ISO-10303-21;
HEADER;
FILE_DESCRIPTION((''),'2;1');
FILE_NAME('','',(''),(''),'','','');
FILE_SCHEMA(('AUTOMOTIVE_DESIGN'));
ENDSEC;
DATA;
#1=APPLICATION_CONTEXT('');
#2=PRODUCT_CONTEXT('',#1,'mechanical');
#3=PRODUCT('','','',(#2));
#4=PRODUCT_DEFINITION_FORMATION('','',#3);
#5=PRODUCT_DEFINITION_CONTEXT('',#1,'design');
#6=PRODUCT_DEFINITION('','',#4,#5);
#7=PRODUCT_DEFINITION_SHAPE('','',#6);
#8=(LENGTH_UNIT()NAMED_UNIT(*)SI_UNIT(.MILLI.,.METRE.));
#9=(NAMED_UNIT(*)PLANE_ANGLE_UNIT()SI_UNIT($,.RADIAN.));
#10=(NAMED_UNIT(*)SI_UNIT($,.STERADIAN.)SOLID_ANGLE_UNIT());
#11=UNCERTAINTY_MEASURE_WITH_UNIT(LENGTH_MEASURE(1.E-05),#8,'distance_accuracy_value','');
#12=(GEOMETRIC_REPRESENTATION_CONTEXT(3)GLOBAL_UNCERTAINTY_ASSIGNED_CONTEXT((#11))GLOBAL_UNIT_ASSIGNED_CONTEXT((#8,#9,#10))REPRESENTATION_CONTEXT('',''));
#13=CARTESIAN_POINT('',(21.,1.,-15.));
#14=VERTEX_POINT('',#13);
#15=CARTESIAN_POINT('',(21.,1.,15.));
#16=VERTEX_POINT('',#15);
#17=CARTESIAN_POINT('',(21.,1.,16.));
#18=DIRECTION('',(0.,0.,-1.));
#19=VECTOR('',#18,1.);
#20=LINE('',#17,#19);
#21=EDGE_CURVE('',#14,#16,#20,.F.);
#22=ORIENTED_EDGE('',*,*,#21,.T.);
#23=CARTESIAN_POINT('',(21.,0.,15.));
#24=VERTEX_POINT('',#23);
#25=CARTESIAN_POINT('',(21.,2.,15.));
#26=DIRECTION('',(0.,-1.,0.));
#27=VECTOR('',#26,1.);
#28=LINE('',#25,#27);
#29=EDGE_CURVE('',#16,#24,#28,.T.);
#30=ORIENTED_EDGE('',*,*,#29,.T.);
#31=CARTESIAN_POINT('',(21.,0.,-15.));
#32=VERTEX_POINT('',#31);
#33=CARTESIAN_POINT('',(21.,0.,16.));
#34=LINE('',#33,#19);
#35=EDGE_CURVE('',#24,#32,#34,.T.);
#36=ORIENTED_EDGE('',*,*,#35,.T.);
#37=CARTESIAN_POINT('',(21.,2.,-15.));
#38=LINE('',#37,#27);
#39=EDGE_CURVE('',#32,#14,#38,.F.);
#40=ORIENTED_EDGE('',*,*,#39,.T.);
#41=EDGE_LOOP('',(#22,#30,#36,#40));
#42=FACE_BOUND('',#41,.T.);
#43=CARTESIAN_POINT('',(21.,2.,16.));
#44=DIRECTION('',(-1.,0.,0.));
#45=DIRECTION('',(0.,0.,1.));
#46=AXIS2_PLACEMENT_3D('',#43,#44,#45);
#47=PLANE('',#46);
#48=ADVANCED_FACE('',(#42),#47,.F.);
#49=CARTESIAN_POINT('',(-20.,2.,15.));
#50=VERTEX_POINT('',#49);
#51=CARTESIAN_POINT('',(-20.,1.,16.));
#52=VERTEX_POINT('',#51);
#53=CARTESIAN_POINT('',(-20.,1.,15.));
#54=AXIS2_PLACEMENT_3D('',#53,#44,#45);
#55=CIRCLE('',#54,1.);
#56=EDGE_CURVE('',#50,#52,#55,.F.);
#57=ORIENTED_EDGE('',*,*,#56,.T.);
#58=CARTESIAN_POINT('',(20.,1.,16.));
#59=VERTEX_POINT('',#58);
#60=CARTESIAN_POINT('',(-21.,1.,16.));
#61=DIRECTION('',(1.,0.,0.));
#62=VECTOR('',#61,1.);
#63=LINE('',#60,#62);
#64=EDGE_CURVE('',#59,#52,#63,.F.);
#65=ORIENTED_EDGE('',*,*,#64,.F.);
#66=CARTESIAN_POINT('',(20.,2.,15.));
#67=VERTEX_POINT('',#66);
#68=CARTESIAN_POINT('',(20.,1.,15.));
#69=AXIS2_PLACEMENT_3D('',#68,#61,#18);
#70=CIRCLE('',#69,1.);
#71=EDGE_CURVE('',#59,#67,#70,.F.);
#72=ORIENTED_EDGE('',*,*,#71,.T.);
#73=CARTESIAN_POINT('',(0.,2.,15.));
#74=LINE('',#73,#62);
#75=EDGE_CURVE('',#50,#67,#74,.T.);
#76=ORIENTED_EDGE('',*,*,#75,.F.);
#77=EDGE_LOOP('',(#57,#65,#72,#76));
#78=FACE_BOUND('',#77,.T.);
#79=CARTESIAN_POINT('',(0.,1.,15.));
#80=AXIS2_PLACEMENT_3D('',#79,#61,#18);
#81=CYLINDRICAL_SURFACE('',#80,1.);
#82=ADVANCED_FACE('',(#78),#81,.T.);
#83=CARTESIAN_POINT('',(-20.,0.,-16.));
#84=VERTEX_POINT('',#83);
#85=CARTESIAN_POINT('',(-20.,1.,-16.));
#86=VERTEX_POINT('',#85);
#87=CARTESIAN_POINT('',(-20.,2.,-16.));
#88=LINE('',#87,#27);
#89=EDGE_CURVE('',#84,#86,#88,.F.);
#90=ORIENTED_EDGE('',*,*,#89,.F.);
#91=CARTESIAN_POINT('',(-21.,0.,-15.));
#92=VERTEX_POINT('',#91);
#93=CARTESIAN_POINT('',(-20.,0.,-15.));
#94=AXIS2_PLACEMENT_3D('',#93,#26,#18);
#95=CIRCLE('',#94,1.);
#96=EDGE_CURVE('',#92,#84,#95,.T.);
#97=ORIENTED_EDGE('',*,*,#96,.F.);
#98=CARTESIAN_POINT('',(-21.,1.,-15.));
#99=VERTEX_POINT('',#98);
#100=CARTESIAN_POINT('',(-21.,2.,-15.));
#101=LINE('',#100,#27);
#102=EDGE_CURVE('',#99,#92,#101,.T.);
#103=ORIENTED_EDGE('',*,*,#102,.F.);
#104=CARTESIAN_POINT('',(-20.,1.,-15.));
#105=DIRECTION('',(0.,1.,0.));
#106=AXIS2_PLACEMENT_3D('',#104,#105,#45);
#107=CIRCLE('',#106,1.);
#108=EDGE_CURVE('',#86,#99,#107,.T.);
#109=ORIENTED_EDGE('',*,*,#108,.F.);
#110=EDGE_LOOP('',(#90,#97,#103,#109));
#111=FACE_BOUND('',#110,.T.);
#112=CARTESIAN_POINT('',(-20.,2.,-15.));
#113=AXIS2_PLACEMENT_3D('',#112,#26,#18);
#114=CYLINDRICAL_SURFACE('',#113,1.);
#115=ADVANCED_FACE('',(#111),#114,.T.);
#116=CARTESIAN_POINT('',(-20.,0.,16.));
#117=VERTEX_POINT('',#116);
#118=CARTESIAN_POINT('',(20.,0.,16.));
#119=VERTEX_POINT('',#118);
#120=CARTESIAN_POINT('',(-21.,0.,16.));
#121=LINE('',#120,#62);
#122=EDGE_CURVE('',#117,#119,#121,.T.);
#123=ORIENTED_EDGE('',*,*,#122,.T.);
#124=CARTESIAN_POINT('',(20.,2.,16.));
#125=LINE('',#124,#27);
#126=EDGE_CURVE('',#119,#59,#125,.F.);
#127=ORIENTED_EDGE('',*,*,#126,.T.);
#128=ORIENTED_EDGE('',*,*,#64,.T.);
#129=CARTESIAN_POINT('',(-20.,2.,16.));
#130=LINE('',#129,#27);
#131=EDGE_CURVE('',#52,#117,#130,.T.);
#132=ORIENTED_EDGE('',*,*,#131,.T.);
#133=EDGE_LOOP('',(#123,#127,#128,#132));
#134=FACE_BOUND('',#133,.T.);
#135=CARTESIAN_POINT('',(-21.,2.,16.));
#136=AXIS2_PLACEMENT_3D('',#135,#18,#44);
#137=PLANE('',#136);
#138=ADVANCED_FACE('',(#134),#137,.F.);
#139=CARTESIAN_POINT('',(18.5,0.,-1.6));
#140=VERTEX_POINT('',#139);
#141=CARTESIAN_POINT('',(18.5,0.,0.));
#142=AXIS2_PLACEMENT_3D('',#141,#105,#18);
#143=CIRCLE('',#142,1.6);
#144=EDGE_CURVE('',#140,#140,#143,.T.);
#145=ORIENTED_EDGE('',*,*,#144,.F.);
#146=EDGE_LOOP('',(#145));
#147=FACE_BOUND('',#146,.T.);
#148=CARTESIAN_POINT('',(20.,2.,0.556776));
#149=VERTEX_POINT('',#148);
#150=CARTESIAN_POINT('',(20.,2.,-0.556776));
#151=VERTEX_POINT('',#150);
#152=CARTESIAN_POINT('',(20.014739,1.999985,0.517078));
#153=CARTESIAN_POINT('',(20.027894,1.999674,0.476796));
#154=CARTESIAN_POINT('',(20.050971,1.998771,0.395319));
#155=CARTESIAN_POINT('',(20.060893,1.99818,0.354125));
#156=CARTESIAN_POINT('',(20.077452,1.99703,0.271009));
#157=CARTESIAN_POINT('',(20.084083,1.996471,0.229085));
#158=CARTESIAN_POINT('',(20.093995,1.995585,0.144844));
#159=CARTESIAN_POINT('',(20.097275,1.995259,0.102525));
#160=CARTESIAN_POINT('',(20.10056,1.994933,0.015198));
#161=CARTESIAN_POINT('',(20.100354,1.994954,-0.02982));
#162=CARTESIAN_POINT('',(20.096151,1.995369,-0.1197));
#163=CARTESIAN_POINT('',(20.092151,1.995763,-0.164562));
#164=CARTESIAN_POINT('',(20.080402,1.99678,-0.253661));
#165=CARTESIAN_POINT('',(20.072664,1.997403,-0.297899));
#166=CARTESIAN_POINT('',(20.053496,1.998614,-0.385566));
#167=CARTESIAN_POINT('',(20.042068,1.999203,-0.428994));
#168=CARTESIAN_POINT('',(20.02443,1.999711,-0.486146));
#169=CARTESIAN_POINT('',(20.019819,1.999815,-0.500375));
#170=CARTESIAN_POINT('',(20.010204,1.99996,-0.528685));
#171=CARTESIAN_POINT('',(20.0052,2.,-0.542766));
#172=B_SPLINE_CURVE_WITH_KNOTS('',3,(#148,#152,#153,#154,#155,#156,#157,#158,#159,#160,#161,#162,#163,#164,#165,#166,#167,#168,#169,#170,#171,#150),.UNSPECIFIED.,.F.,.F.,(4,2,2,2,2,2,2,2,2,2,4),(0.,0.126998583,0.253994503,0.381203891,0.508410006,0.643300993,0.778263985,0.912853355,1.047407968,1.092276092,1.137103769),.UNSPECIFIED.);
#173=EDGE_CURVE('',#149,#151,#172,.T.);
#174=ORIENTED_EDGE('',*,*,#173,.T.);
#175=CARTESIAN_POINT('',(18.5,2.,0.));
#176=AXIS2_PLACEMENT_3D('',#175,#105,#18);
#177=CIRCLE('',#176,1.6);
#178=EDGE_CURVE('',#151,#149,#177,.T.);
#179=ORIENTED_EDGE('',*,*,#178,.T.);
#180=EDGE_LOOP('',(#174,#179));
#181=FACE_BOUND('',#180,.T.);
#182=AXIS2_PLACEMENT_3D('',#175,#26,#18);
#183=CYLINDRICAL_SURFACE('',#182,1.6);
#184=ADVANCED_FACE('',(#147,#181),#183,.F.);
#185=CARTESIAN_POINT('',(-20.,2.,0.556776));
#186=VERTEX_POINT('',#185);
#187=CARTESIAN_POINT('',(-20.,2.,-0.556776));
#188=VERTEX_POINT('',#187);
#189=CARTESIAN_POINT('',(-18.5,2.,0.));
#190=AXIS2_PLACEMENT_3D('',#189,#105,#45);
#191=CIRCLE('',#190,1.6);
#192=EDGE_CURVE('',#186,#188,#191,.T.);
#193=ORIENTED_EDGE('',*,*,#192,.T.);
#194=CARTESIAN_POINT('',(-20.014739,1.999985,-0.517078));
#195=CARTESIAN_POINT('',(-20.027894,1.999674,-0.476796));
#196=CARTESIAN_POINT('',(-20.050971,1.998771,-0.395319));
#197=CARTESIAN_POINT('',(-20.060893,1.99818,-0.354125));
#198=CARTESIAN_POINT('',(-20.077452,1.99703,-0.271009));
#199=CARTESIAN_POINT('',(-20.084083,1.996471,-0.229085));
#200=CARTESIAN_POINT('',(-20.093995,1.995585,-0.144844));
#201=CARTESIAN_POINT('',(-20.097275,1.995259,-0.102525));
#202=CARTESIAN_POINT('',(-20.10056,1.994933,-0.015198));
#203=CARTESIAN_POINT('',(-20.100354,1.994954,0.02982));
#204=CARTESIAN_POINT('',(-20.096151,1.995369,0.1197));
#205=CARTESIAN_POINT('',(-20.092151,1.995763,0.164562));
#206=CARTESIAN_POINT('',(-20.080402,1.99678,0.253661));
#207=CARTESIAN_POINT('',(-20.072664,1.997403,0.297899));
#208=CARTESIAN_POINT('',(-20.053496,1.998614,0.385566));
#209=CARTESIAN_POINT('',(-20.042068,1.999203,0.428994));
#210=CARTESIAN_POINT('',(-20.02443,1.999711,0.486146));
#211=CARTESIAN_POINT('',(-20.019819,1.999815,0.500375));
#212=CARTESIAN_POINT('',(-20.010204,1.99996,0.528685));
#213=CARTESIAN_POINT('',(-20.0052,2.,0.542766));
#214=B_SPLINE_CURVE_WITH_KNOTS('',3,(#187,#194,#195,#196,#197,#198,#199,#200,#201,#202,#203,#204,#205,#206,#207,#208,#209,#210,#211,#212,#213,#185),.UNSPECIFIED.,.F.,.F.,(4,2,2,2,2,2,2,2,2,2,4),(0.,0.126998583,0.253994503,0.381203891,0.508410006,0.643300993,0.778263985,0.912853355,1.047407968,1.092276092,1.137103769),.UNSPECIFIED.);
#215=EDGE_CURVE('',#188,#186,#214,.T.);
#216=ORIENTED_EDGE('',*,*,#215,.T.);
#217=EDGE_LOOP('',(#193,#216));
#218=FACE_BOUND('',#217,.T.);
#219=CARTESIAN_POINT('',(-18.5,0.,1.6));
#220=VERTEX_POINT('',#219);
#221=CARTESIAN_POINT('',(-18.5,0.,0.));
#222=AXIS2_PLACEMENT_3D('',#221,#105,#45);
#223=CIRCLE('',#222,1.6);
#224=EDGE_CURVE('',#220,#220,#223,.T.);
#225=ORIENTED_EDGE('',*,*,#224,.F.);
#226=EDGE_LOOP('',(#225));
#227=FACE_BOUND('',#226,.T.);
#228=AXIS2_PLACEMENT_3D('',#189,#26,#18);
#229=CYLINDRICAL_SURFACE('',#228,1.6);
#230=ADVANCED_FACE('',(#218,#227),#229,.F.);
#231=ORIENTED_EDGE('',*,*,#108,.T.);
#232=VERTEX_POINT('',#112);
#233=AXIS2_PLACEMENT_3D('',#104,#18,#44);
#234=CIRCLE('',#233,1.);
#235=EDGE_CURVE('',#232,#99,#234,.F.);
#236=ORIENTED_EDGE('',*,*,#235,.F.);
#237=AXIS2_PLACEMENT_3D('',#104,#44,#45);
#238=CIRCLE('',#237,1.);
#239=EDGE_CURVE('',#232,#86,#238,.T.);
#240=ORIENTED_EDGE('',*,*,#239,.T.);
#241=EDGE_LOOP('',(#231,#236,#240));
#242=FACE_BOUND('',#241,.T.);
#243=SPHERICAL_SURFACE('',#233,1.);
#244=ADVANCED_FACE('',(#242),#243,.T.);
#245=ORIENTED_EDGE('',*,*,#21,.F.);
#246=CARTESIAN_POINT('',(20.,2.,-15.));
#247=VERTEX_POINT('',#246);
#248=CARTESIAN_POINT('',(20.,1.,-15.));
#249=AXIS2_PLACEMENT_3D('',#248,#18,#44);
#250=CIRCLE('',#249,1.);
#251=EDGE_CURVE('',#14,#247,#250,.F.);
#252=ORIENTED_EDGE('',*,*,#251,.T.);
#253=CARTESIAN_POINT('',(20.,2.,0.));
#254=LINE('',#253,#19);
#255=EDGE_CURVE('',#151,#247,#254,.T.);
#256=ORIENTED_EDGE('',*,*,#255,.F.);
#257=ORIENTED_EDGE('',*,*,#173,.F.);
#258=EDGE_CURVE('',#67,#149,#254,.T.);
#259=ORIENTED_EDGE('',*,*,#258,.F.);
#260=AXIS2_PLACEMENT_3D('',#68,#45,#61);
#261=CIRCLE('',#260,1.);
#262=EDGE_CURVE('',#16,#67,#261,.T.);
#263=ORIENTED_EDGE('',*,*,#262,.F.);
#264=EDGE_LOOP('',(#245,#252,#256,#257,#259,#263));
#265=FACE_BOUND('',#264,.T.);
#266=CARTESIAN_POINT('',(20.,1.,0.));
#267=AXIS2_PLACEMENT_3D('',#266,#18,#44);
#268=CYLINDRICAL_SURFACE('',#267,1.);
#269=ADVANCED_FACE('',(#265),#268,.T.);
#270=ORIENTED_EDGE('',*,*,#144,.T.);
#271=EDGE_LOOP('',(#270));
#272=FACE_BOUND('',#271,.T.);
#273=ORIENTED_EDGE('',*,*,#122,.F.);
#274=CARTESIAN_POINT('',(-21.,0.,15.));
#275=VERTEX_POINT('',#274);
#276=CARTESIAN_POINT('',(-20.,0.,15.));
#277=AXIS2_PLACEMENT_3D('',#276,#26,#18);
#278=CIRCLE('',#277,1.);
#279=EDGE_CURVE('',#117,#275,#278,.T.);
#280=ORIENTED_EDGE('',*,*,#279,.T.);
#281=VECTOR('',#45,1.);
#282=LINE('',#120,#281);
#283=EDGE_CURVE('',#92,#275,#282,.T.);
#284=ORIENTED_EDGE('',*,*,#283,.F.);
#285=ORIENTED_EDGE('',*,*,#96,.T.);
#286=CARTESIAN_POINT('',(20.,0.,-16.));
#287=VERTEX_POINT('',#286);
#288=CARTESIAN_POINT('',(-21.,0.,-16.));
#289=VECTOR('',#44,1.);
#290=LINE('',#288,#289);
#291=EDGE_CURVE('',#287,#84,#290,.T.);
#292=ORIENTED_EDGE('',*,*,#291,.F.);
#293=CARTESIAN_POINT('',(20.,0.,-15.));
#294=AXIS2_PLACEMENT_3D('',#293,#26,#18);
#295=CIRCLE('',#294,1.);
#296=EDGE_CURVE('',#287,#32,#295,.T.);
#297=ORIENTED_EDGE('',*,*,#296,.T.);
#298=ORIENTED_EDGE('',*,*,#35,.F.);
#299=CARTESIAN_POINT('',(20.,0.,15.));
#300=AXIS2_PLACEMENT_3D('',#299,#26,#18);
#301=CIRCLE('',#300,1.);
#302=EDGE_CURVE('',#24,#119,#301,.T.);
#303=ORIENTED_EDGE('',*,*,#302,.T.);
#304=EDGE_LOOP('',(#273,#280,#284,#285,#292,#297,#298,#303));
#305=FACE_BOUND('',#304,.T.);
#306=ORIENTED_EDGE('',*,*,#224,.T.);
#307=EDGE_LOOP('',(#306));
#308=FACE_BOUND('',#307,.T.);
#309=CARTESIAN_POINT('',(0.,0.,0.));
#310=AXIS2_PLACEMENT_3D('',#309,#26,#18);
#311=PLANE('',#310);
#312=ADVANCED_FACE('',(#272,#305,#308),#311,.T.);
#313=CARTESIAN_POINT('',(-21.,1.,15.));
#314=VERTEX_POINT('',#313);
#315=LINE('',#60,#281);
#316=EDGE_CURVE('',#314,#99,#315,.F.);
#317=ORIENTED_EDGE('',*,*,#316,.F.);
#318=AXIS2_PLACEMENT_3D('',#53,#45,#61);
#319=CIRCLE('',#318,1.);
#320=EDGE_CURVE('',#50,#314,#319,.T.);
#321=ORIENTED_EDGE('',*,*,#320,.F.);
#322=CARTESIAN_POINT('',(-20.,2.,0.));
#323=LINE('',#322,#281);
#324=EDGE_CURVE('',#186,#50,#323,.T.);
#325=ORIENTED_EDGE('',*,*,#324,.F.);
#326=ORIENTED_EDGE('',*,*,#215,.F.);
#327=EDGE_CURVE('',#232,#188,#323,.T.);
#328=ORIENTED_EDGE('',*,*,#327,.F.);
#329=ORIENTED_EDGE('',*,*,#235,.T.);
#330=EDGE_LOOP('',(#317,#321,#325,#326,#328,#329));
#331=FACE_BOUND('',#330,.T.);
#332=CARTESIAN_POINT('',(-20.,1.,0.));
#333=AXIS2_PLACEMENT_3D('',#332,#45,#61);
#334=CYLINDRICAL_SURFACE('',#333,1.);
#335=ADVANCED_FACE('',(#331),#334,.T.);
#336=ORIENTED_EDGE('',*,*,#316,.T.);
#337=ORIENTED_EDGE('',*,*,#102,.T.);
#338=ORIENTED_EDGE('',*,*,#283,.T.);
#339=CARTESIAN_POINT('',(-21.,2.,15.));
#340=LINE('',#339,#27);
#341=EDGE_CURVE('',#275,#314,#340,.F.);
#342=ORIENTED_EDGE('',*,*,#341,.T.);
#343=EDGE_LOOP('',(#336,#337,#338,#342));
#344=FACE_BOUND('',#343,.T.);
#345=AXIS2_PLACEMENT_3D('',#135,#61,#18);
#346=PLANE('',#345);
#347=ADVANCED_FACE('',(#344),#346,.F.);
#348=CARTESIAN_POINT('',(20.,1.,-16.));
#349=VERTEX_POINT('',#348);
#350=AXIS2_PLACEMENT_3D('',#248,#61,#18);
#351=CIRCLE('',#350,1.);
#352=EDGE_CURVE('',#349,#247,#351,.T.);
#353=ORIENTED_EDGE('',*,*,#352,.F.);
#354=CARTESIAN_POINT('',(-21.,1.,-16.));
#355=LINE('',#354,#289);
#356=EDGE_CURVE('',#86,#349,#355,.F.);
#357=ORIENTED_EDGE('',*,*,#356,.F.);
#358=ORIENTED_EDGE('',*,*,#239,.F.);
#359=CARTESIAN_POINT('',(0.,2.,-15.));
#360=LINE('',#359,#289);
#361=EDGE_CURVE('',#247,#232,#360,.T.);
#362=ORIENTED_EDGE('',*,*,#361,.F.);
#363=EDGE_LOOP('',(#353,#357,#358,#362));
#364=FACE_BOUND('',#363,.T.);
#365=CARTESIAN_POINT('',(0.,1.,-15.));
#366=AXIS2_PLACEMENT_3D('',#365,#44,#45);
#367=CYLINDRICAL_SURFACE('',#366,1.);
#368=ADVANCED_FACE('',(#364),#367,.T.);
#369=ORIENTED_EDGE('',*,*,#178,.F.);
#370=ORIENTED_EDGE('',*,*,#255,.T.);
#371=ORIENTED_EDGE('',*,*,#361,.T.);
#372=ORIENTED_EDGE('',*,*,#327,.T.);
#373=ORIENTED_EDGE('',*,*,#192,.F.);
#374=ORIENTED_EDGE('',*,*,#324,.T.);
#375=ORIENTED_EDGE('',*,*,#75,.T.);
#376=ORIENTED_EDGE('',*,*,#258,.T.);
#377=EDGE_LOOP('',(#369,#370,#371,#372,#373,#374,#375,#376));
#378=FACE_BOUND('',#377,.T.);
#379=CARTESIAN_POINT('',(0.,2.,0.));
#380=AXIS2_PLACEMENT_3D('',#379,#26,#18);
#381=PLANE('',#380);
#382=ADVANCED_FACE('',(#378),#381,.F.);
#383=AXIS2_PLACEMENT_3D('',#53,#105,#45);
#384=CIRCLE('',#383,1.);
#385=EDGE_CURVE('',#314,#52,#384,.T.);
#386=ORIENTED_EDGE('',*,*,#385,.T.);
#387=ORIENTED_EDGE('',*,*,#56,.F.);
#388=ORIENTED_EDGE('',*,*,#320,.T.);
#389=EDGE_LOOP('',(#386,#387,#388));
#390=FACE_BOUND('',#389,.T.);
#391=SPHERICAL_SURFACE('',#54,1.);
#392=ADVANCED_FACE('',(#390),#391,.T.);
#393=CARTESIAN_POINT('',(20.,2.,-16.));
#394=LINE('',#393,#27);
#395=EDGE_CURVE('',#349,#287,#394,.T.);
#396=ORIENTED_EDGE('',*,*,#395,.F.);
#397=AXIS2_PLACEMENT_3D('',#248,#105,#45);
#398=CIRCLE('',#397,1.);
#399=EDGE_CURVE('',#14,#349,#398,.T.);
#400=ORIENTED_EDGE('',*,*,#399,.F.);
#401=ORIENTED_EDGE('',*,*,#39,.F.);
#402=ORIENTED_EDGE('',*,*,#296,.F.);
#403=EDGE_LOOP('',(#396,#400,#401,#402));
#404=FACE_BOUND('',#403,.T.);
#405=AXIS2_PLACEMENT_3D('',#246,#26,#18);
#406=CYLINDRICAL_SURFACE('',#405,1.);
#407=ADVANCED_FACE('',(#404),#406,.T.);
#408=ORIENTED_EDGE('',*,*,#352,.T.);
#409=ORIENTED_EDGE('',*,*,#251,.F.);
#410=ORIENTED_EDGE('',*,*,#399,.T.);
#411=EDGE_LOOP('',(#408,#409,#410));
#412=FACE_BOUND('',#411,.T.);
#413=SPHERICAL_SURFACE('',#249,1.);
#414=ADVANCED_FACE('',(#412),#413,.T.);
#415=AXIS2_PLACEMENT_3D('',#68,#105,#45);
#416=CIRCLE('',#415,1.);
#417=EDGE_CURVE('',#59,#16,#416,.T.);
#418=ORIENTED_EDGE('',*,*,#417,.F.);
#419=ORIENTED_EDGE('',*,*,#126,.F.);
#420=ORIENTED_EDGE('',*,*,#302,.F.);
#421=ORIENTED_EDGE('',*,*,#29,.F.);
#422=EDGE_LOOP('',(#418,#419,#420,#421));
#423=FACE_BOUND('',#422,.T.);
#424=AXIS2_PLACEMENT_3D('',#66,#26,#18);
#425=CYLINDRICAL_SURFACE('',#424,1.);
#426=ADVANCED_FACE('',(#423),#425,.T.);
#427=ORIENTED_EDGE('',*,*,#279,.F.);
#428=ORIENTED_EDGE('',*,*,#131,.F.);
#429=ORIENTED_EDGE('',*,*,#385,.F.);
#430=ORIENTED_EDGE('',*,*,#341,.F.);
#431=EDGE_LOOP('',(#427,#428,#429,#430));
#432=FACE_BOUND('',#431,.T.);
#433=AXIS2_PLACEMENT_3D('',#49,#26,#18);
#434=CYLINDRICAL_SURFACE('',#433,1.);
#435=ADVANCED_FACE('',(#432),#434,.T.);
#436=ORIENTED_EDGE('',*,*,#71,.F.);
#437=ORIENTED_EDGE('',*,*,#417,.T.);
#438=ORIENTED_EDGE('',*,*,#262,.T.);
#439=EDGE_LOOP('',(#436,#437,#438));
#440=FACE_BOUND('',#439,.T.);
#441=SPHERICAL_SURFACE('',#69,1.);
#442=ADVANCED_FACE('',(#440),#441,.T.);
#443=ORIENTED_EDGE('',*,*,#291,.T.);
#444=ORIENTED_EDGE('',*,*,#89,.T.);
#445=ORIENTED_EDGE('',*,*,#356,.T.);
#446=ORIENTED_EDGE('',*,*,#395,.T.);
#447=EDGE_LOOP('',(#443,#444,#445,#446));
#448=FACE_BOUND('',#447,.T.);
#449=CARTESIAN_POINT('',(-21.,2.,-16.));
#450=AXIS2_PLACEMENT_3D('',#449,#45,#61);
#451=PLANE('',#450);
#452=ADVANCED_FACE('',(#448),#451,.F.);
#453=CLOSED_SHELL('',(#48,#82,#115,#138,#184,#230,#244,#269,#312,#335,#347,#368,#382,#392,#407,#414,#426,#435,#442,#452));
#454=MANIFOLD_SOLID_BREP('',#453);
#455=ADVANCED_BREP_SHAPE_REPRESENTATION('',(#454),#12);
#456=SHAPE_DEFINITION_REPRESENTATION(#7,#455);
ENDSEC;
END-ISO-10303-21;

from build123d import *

# Parameters (mm, degrees)
SKETCH1_W           = 42
SKETCH1_H           = 32
SKETCH1_R           = 1.6
BOSS_EXTRUDE1_DEPTH = 2
FILLET1_R           = 1


with BuildPart() as part:
    # Sketch1 → Boss-Extrude1 (new body)
    with BuildSketch(Plane(origin=(0, 0, 0), x_dir=(1, 0, 0), z_dir=(0, 1, 0))):
        Rectangle(SKETCH1_W, SKETCH1_H)
        with Locations(Location((-18.5, 0, 0), (0, 0, 270))):
            Circle(SKETCH1_R, mode=Mode.SUBTRACT)
        with Locations(Location((18.5, 0, 0), (0, 0, 90))):
            Circle(SKETCH1_R, mode=Mode.SUBTRACT)
    extrude(amount=BOSS_EXTRUDE1_DEPTH)

    # Fillet1
    # the kernel refuses this fillet: 1 mm, written as the material it takes off along each edge
    with BuildSketch(Plane(origin=(-20, 1, -15), x_dir=(-1, 0, 0), z_dir=(0, 0, -1))) as fillet1_piece_1_section:
        Polygon((0, 0), (FILLET1_R, 0), (FILLET1_R, FILLET1_R), (0, FILLET1_R), align=None)
    fillet1_piece_1 = extrude(amount=FILLET1_R, mode=Mode.PRIVATE)
    fillet1_piece_1 = fillet1_piece_1 - Plane(origin=(-20, 1, -15), x_dir=(0.7071067811865475, -0.7071067811865475, 0), z_dir=(0, 0, -1)) * Sphere(FILLET1_R, mode=Mode.PRIVATE)
    add(fillet1_piece_1, mode=Mode.SUBTRACT)
    with BuildSketch(Plane(origin=(-20, 1, 15), x_dir=(-1, 0, 0), z_dir=(0, 0, 1))) as fillet1_piece_2_section:
        Polygon((0, 0), (FILLET1_R, 0), (FILLET1_R, -FILLET1_R), (0, -FILLET1_R), align=None)
    fillet1_piece_2 = extrude(amount=FILLET1_R, mode=Mode.PRIVATE)
    fillet1_piece_2 = fillet1_piece_2 - Plane(origin=(-20, 1, 15), x_dir=(0.7071067811865475, -0.7071067811865475, 0), z_dir=(0, 0, 1)) * Sphere(FILLET1_R, mode=Mode.PRIVATE)
    add(fillet1_piece_2, mode=Mode.SUBTRACT)
    with BuildSketch(Plane(origin=(20, 1, 15), x_dir=(1, 0, 0), z_dir=(0, 0, 1))) as fillet1_piece_3_section:
        Polygon((0, 0), (FILLET1_R, 0), (FILLET1_R, FILLET1_R), (0, FILLET1_R), align=None)
    fillet1_piece_3 = extrude(amount=FILLET1_R, mode=Mode.PRIVATE)
    fillet1_piece_3 = fillet1_piece_3 - Plane(origin=(20, 1, 15), x_dir=(-0.7071067811865475, -0.7071067811865475, 0), z_dir=(0, 0, 1)) * Sphere(FILLET1_R, mode=Mode.PRIVATE)
    add(fillet1_piece_3, mode=Mode.SUBTRACT)
    with BuildSketch(Plane(origin=(20, 1, -15), x_dir=(0, 0, -1), z_dir=(1, 0, 0))) as fillet1_piece_4_section:
        Polygon((0, 0), (FILLET1_R, 0), (FILLET1_R, FILLET1_R), (0, FILLET1_R), align=None)
    fillet1_piece_4 = extrude(amount=FILLET1_R, mode=Mode.PRIVATE)
    fillet1_piece_4 = fillet1_piece_4 - Plane(origin=(20, 1, -15), x_dir=(0, -0.7071067811865475, 0.7071067811865475), z_dir=(1, 0, 0)) * Sphere(FILLET1_R, mode=Mode.PRIVATE)
    add(fillet1_piece_4, mode=Mode.SUBTRACT)
    with BuildSketch(Plane(origin=(-21, 2, -15), x_dir=(0, -1, 0), z_dir=(0, 0, 1)), Plane(origin=(21, 2, 15), x_dir=(0, -1, 0), z_dir=(0, 0, -1))) as fillet1_piece_5:
        with BuildLine():
            CenterArc((FILLET1_R, FILLET1_R), FILLET1_R, 180, 90)
            Line((0, FILLET1_R), (0, 0))
            Line((0, 0), (FILLET1_R, 0))
        make_face()
    extrude(amount=30, mode=Mode.SUBTRACT)
    with BuildSketch(Plane(origin=(-20, 2, 16), x_dir=(0, -1, 0), z_dir=(1, 0, 0)), Plane(origin=(20, 2, -16), x_dir=(0, -1, 0), z_dir=(-1, 0, 0))) as fillet1_piece_6:
        with BuildLine():
            CenterArc((FILLET1_R, FILLET1_R), FILLET1_R, 180, 90)
            Line((0, FILLET1_R), (0, 0))
            Line((0, 0), (FILLET1_R, 0))
        make_face()
    extrude(amount=40, mode=Mode.SUBTRACT)
    with BuildSketch(Plane(origin=(21, -2.5, 16), x_dir=(-1, 0, 0), z_dir=(0, 1, 0)), Plane(origin=(-21, -2.5, -16), x_dir=(1, 0, 0), z_dir=(0, 1, 0)), Plane(origin=(21, -2.5, -16), x_dir=(0, 0, 1), z_dir=(0, 1, 0))) as fillet1_piece_7:
        with BuildLine():
            CenterArc((FILLET1_R, -FILLET1_R), FILLET1_R, 90, 90)
            Line((0, -FILLET1_R), (0, 0))
            Line((0, 0), (FILLET1_R, 0))
        make_face()
    extrude(amount=3.5, mode=Mode.SUBTRACT)
    with BuildSketch(Plane(origin=(-21, -2.5, 16), x_dir=(1, 0, 0), z_dir=(0, 1, 0))) as fillet1_piece_8:
        with BuildLine():
            CenterArc((FILLET1_R, FILLET1_R), FILLET1_R, 180, 90)
            Line((0, FILLET1_R), (0, 0))
            Line((0, 0), (FILLET1_R, 0))
        make_face()
    extrude(amount=3.5, mode=Mode.SUBTRACT)


solid = part.part
